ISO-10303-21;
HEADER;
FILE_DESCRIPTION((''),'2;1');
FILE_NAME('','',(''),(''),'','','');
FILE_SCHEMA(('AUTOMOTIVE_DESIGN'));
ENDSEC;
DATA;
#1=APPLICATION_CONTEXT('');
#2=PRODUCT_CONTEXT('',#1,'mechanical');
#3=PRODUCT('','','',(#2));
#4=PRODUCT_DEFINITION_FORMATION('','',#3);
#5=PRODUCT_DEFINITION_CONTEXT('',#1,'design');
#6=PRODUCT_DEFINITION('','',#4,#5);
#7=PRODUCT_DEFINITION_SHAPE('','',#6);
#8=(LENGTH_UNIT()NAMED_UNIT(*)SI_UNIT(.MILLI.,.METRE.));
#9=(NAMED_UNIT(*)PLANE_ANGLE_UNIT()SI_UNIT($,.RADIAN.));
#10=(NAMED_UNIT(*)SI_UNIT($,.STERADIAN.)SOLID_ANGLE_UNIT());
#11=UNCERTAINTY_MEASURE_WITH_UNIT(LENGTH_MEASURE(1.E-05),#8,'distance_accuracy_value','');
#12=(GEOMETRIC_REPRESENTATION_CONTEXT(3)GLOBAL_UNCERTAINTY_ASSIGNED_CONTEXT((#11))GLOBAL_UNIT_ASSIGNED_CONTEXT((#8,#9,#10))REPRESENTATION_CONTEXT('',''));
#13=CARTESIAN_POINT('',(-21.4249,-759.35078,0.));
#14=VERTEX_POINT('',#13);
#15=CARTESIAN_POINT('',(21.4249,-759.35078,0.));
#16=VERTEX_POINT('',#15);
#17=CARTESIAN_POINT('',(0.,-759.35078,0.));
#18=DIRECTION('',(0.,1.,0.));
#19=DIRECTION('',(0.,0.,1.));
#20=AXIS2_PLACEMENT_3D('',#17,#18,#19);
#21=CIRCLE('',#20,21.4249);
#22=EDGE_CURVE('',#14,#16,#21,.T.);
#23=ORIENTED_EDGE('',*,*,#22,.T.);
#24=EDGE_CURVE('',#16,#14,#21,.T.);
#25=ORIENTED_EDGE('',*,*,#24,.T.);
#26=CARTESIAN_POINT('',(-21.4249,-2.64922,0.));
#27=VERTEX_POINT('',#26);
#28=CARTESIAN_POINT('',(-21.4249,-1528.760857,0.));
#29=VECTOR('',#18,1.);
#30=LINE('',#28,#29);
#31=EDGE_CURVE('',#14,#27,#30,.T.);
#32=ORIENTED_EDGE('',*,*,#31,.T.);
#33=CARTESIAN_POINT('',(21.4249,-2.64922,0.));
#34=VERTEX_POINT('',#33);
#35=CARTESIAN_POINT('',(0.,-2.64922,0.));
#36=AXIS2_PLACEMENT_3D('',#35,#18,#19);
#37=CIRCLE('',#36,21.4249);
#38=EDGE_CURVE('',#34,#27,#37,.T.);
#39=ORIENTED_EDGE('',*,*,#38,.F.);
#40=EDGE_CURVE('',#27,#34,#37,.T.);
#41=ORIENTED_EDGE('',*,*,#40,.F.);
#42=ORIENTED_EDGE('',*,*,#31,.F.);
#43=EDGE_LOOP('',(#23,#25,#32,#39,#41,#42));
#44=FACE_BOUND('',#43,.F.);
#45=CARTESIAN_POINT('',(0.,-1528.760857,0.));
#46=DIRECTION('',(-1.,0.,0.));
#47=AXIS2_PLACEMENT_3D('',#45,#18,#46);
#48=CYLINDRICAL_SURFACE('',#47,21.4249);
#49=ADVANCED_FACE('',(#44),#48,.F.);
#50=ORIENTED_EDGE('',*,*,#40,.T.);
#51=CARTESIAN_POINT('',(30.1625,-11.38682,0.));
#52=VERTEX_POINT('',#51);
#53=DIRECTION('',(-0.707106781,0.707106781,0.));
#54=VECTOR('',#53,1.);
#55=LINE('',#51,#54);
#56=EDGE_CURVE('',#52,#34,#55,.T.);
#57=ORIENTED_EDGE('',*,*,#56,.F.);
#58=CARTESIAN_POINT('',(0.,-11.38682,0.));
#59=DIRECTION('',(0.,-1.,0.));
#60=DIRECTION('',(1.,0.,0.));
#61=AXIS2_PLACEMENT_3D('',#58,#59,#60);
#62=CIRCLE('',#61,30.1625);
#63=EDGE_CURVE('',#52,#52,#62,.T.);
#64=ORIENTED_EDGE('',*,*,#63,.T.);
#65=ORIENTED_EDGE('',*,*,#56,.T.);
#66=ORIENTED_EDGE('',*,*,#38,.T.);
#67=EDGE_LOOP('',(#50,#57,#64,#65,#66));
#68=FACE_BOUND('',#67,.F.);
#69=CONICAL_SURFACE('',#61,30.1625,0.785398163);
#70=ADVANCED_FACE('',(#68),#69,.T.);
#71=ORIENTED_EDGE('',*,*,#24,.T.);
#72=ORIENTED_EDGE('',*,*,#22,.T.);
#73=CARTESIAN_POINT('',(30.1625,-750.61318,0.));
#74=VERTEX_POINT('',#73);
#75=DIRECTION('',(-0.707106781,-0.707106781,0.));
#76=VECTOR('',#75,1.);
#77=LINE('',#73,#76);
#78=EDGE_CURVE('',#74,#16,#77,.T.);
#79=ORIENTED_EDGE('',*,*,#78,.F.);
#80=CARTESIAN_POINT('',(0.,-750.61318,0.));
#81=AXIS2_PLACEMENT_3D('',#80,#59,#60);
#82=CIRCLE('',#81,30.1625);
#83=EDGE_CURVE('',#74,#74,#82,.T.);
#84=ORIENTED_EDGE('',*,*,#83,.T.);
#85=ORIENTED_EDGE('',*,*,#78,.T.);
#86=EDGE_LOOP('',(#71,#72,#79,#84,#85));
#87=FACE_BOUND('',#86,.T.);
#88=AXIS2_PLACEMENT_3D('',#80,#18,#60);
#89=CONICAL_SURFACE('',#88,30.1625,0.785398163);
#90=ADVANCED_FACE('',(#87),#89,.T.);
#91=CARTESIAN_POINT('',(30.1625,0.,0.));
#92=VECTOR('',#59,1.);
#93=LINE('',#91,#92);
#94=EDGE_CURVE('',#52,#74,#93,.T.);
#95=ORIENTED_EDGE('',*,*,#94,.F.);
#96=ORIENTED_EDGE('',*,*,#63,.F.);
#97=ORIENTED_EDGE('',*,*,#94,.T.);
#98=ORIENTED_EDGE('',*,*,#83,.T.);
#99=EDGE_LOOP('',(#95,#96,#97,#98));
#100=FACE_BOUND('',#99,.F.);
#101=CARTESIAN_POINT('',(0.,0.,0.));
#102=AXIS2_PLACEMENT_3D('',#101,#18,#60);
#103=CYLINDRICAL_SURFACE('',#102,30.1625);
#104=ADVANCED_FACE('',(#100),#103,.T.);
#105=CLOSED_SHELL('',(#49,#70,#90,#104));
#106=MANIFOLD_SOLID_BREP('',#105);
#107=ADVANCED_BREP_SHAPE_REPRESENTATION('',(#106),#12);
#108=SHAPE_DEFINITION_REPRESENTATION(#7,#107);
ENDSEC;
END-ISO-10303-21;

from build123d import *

# Parameters (mm, degrees)
F0_R     = 30.1625
F1_DEPTH = 762
F3_D     = 42.8498


# Not quite as in the source:
# - a fillet or chamfer that OpenCascade refuses, or shapes differently, is made with other operations: its cross-section is extruded or revolved along the edge and cut away or added


with BuildPart() as f1:
    # F0 (on Front) → F1 (new body)
    with BuildSketch(Plane.XZ):
        Circle(F0_R)
    extrude(amount=F1_DEPTH)

    # F3 (through all)
    with Locations(Plane.XZ.offset(762)):
        with Locations((0, 0)):
            Hole(F3_D / 2)

    # F4: chamfer of 11.38682 on 2 edges, made by hand

    # F4_s1 → F4_t2 (revolve, cut)
    with BuildSketch(Plane.XY):
        Polygon((30.1625, -750.61318), (18.77568, -762), (30.1625, -762), align=None)
    revolve(axis=Axis((0, -762, 0), (0, -1, 0)), mode=Mode.SUBTRACT)

    # F4_s3 → F4_t4 (revolve, cut)
    with BuildSketch(Plane.XY):
        Polygon((30.1625, -11.38682), (18.77568, 0), (30.1625, 0), align=None)
    revolve(axis=Axis((0, 0, 0), (0, -1, 0)), mode=Mode.SUBTRACT)


solid = f1.part
